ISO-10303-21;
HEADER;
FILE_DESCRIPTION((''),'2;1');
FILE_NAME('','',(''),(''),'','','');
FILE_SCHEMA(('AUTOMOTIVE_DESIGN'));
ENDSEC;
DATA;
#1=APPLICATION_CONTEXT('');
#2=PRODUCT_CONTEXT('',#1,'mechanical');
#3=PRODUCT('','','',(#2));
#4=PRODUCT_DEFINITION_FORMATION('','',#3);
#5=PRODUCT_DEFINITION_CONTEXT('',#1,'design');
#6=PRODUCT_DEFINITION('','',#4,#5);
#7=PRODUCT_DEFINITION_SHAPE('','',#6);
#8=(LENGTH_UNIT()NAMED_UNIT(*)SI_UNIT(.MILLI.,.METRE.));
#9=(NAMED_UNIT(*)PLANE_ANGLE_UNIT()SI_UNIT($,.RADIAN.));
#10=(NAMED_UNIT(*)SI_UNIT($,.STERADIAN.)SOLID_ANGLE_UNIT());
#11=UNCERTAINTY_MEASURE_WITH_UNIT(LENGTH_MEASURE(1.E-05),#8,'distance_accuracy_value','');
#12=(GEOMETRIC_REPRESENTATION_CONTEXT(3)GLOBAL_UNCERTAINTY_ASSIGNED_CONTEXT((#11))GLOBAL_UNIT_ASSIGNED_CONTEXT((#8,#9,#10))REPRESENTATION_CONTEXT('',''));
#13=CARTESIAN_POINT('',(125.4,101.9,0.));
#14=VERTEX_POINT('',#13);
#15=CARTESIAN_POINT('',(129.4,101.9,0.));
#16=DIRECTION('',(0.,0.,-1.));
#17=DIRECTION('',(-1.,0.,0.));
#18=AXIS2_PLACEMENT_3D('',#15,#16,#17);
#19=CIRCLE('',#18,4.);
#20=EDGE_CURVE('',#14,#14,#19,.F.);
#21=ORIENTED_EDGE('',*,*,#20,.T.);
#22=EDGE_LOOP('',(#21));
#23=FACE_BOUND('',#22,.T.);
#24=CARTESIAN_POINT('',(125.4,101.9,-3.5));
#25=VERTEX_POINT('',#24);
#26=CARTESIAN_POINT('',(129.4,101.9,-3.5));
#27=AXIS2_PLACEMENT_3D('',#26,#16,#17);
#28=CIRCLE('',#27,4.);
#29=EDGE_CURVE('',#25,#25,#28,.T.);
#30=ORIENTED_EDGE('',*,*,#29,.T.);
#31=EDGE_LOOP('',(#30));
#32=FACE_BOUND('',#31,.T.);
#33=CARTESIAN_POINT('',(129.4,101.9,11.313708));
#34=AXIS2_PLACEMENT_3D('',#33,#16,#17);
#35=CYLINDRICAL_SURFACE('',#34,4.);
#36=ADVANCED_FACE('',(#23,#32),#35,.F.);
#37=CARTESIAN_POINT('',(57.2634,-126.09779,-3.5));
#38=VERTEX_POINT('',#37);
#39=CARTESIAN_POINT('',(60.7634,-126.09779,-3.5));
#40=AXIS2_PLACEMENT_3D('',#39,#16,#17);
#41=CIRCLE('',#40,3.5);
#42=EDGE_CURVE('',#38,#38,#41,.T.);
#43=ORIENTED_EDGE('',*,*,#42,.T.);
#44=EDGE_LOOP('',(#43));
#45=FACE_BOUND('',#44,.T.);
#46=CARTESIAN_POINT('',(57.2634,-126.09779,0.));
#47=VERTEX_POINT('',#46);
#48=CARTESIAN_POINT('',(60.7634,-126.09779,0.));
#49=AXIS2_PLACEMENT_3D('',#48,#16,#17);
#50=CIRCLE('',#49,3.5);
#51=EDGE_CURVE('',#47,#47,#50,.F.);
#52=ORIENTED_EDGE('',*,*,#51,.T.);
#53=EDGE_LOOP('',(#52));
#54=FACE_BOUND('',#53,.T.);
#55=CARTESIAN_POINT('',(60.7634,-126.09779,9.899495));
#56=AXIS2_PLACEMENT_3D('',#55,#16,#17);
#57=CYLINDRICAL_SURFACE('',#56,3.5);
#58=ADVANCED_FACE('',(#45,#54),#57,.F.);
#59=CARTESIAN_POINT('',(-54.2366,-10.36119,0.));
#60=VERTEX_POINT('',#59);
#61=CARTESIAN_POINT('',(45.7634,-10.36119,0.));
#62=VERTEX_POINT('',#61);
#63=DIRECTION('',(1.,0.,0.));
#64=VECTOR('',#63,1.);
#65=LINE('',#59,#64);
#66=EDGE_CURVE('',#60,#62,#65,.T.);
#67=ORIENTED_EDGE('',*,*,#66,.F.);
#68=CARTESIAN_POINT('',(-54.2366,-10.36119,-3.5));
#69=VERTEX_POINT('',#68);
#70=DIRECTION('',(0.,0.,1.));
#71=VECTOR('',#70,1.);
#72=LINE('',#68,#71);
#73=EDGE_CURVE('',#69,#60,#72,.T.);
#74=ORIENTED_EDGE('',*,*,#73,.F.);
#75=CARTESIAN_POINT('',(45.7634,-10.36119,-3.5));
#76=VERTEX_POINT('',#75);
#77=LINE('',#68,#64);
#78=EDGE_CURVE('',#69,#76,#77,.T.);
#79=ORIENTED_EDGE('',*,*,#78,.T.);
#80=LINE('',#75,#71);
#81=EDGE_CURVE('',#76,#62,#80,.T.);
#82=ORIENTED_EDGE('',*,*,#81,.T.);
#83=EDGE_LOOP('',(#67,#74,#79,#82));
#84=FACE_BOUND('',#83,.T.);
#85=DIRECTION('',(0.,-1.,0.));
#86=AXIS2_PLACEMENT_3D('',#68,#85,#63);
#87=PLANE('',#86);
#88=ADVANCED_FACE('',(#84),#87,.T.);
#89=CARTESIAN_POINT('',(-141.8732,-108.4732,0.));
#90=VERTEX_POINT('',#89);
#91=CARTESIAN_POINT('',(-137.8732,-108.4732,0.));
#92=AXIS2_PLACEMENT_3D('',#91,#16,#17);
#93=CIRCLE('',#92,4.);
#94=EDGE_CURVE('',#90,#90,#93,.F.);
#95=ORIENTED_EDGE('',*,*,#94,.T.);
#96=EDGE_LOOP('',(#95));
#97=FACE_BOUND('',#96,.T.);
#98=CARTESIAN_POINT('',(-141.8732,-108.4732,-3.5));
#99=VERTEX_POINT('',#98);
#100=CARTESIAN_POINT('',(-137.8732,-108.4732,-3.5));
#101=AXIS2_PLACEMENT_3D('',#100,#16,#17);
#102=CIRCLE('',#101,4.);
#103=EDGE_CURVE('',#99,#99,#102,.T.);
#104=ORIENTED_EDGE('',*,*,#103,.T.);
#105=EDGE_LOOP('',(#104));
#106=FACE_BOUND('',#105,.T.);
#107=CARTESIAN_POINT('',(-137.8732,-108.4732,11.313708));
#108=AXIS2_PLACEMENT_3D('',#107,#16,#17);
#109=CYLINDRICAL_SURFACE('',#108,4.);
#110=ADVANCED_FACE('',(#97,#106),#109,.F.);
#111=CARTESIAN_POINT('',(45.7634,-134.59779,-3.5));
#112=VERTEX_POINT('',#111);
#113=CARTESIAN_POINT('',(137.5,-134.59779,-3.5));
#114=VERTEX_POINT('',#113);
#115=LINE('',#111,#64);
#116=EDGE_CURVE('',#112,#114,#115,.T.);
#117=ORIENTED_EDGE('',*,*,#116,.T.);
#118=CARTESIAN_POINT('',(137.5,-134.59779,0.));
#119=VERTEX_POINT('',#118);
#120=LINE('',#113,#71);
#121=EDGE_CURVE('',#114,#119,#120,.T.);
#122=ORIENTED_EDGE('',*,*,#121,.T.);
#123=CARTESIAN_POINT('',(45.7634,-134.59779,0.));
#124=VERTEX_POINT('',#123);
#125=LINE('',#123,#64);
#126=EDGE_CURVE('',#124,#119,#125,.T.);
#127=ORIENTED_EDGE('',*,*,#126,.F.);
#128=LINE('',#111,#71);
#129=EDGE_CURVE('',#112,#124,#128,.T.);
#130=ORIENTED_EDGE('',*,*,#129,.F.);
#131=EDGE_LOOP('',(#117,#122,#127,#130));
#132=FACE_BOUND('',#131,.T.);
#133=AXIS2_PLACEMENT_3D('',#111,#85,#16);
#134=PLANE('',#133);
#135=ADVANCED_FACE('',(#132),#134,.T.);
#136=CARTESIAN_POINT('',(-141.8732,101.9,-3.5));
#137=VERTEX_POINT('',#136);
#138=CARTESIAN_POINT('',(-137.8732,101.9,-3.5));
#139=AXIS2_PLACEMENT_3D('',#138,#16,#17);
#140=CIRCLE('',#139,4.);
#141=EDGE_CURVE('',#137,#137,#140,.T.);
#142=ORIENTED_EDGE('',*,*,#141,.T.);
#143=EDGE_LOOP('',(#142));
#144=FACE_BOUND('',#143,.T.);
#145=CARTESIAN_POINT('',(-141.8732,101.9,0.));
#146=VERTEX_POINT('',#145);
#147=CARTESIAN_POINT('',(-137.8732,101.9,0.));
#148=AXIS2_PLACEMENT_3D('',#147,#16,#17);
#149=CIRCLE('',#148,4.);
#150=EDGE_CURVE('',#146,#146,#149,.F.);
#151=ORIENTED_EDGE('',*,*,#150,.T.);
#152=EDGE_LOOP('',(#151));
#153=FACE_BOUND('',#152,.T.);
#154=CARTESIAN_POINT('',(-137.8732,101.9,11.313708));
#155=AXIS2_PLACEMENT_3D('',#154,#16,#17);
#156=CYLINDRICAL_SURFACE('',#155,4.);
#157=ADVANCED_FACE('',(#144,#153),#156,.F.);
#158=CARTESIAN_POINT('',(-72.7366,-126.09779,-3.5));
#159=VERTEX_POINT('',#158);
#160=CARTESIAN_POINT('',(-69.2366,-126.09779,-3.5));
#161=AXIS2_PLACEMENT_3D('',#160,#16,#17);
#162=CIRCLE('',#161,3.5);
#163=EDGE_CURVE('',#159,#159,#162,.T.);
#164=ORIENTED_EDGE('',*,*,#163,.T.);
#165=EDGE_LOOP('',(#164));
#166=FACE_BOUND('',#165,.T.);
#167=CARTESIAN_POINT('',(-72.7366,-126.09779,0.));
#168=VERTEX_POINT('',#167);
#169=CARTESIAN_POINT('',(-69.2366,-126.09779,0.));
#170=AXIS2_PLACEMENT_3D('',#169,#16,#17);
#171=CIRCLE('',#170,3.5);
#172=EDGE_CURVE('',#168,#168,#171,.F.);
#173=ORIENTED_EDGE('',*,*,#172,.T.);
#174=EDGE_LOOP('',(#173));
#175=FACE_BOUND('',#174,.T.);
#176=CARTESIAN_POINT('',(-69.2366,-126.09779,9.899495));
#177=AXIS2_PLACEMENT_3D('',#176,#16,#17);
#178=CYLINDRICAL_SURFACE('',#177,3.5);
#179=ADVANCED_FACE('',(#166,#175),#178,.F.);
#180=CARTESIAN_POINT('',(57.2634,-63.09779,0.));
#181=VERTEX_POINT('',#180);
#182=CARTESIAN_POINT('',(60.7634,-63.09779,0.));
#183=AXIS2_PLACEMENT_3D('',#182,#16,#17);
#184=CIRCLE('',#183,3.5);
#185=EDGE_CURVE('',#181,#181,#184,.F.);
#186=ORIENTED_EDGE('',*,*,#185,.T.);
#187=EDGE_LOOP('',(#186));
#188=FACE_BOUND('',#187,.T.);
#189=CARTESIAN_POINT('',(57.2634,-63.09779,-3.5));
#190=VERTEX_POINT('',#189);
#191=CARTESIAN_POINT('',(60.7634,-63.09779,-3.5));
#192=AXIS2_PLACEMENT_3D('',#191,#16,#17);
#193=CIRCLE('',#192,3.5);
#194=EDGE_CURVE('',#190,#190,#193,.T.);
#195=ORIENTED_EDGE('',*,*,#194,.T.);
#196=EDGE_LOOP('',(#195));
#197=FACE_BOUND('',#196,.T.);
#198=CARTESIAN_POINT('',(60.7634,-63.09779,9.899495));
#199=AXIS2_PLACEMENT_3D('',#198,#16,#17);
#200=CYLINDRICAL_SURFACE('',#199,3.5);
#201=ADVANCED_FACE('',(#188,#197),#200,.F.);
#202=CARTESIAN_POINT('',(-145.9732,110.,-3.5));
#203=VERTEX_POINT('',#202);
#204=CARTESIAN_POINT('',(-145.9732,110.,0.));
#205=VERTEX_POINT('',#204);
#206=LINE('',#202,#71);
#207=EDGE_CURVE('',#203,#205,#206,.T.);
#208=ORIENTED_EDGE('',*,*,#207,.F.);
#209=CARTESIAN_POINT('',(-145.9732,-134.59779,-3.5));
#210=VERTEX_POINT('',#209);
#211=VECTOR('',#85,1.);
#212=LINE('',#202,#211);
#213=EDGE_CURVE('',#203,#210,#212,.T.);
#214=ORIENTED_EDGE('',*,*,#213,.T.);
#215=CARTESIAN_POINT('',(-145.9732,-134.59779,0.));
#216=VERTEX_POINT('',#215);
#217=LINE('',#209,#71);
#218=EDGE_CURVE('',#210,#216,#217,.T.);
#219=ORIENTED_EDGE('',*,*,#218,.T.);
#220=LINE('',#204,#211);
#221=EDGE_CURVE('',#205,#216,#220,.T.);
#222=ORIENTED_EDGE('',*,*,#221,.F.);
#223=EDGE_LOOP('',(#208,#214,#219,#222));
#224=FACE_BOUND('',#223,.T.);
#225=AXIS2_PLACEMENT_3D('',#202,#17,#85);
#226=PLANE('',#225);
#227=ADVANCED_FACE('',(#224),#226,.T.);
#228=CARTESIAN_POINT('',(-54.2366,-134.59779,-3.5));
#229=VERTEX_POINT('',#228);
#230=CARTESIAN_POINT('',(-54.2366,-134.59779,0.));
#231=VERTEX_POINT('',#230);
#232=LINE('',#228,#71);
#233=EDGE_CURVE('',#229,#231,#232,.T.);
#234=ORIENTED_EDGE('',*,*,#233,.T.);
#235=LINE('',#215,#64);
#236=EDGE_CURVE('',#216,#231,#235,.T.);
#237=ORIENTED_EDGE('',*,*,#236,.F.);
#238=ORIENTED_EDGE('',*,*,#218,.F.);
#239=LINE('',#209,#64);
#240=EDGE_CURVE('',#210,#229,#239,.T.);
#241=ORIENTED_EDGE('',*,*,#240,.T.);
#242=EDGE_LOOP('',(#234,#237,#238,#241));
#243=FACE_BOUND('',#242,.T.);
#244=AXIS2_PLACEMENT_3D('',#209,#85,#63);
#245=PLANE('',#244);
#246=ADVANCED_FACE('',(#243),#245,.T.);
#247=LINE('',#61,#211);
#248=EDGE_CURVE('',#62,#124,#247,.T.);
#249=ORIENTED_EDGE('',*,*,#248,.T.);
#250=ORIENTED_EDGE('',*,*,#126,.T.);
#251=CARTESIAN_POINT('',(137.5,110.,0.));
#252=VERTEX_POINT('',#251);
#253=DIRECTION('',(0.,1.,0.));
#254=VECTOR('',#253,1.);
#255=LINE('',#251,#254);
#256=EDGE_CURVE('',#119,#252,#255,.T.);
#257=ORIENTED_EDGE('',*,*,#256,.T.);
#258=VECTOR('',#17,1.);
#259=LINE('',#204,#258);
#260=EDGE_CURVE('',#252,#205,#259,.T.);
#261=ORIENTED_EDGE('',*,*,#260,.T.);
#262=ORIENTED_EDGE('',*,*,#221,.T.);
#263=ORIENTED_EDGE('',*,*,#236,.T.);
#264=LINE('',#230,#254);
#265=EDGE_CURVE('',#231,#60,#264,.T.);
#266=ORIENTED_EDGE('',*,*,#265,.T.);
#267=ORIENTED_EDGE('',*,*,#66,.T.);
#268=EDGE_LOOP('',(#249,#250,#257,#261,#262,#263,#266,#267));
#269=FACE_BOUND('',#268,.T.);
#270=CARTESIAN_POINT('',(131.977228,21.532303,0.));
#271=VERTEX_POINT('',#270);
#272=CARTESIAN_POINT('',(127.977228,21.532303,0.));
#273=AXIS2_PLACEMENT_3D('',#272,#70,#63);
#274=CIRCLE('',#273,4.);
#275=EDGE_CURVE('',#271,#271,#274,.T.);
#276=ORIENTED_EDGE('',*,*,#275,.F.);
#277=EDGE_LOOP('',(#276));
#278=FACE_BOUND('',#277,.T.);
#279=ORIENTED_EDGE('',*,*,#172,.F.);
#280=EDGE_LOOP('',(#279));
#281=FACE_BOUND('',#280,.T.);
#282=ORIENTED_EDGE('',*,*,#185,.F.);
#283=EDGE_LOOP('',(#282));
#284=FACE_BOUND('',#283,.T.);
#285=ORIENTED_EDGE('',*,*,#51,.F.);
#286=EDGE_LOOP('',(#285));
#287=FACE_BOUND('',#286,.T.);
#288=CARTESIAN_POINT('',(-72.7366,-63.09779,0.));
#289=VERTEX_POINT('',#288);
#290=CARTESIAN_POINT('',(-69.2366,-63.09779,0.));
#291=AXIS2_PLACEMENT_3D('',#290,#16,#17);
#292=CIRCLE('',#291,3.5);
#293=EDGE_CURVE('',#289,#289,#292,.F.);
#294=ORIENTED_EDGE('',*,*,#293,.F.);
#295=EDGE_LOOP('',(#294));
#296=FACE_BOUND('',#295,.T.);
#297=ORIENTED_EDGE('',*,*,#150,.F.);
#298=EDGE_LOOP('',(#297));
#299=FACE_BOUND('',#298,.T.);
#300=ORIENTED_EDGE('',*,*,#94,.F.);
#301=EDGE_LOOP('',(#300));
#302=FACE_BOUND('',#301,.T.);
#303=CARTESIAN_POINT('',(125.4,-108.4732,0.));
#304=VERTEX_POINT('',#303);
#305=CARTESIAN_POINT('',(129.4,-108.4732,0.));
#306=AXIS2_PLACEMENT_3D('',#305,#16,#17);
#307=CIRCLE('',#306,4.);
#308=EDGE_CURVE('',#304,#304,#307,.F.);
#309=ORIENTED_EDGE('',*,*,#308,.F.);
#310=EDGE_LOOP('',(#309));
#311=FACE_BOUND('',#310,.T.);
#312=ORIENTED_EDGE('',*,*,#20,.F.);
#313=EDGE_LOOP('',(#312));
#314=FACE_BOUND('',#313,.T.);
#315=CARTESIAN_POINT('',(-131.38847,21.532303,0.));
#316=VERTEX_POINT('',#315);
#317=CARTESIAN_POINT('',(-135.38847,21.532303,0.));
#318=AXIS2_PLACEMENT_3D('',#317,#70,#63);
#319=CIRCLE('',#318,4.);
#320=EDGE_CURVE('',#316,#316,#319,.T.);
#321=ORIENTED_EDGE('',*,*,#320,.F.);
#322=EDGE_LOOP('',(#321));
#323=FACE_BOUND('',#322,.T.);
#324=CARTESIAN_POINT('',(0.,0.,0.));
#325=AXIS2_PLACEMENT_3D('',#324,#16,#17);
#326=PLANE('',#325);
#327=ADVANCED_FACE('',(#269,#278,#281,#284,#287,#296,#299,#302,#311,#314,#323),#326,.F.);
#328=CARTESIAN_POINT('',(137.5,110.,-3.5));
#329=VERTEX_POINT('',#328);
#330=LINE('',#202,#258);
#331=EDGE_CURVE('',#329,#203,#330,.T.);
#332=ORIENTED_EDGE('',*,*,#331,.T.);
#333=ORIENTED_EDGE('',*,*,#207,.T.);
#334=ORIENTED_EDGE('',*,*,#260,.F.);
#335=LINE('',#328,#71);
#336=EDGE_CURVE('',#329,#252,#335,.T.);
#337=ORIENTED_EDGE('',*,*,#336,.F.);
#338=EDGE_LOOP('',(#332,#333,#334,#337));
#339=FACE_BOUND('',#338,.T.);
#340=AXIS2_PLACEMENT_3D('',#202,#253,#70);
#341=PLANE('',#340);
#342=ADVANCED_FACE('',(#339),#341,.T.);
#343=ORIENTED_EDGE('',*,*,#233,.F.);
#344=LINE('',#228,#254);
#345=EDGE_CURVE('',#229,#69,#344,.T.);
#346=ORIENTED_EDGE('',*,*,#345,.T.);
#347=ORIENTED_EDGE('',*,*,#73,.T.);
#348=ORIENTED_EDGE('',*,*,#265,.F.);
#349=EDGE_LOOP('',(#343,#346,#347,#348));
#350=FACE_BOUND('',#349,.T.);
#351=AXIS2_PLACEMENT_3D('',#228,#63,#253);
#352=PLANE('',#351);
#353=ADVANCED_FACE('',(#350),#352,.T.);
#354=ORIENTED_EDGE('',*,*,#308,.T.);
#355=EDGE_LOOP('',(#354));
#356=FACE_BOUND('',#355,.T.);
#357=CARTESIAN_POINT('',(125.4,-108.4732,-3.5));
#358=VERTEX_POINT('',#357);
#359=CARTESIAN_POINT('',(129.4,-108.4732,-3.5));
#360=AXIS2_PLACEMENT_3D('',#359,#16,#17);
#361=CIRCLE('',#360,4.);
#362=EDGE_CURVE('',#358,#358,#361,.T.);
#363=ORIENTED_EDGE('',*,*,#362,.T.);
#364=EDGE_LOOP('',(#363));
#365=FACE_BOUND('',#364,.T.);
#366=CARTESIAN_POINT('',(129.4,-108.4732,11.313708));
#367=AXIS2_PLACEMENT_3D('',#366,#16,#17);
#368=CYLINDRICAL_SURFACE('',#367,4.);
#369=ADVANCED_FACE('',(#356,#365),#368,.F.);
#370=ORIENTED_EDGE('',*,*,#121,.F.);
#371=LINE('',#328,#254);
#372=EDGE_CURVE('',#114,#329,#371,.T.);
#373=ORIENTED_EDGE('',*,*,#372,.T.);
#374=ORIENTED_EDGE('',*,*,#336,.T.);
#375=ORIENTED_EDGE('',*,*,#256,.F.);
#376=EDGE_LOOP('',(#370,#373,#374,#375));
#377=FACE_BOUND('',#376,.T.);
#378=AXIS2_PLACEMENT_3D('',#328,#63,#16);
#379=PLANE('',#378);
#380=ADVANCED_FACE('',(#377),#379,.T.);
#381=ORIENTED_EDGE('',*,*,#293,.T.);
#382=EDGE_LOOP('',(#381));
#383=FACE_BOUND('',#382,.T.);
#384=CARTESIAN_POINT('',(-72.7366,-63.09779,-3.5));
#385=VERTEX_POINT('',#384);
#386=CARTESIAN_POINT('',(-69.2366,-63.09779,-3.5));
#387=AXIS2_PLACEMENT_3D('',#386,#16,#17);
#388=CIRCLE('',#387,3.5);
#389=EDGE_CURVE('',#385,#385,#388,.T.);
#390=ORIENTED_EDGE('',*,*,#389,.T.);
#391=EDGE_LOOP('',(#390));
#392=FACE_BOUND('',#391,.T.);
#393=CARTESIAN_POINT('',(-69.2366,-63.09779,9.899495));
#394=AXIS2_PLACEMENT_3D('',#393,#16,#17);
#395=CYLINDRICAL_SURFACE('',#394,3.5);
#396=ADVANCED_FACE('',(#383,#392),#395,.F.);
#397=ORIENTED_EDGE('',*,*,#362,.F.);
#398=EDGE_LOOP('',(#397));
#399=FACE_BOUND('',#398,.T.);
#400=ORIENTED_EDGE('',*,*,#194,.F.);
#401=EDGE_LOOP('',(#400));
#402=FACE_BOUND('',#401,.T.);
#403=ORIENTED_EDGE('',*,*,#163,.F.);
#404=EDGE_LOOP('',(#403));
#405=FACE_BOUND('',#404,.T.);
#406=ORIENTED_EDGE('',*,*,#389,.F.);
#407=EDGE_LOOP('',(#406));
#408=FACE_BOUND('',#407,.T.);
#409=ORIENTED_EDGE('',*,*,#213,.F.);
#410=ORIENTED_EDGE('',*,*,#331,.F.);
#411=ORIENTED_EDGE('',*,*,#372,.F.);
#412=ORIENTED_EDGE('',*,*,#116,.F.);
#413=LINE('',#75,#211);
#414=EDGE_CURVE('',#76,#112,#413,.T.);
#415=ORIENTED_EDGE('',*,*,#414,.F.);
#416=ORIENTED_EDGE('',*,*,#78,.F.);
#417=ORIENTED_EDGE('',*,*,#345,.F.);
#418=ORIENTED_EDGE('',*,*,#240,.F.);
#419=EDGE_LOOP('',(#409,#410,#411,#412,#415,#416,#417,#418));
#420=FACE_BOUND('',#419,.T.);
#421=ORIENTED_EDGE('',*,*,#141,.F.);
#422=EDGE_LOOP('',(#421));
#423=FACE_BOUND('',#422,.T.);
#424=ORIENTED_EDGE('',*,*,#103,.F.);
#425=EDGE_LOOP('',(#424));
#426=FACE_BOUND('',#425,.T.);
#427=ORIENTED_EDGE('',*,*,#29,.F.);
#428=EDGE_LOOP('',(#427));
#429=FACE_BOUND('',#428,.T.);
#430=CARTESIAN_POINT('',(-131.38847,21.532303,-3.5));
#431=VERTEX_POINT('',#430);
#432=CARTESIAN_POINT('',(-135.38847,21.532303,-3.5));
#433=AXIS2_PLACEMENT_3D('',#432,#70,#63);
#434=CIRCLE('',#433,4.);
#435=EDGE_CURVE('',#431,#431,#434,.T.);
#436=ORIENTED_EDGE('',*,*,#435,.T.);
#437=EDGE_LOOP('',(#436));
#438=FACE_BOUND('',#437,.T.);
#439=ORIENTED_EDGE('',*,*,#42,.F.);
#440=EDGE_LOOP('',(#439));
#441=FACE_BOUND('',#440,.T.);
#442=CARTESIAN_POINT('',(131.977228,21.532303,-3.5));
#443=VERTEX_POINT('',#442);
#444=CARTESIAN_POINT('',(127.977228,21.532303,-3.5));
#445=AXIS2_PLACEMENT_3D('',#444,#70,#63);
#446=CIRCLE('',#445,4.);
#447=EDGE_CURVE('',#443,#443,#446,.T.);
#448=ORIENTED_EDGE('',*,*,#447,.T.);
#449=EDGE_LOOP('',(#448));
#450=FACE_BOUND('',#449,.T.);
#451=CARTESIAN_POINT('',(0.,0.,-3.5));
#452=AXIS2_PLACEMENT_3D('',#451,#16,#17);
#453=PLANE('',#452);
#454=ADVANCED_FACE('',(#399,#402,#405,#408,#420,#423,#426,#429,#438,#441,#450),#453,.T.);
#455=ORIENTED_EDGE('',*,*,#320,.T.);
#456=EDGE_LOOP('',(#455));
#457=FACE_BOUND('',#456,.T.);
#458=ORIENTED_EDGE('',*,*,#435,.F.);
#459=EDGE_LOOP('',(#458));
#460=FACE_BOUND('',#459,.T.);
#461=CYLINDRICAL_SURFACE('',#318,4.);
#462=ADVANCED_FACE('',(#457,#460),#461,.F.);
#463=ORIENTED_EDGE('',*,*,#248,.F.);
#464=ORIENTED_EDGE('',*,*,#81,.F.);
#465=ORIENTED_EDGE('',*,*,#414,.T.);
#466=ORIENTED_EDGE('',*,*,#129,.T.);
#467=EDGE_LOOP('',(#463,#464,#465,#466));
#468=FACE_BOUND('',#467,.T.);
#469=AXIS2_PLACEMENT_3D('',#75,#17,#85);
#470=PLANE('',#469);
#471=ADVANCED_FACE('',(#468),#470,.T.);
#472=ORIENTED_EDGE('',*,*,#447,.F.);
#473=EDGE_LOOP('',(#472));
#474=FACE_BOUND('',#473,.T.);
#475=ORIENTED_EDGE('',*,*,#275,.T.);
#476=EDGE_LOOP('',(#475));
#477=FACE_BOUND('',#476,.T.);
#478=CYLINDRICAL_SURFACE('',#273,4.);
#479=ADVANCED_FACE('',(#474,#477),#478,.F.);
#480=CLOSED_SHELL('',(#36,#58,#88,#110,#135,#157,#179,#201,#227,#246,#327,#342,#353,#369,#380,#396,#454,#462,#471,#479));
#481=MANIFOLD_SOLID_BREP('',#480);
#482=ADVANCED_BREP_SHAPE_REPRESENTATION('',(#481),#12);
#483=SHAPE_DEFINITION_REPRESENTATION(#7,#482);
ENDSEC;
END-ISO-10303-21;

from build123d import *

# Parameters (mm, degrees)
BASE_FLANGE1_DEPTH    = 3.5
SKETCH2_R             = 3.5
CUT_EXTRUDE1_DEPTH    = 3.5
SKETCH3_R             = 4
CUT_EXTRUDE2_DEPTH    = 3.5
F_8_0MM_DOWEL_HOLE1_D = 8
F_8_0MM_DOWEL_HOLE2_D = 8


# Sheet-metal steps are written as plain solids
with BuildPart() as part:
    # Sketch1 → Base-Flange1 (new body)
    with BuildSketch(Plane.XY):
        Polygon((-54.2366, -134.59778982), (-54.2366, -10.36118982), (45.7634, -10.36118982), (45.7634, -134.59778982), (137.5, -134.59778982), (137.5, 110), (-145.9732, 110), (-145.9732, -134.59778982), align=None)
    extrude(amount=-BASE_FLANGE1_DEPTH)

    # Sketch2 → Cut-Extrude1 (cut)
    with BuildSketch(Plane(origin=(0, 0, -3.5), x_dir=(-1, 0, 0), z_dir=(0, 0, -1))):
        with Locations((-60.7634, -126.09778982)):
            Circle(SKETCH2_R)
        with Locations((69.2366, -126.09778982)):
            Circle(SKETCH2_R)
        with Locations((-60.7634, -63.09778982)):
            Circle(SKETCH2_R)
        with Locations((69.2366, -63.09778982)):
            Circle(SKETCH2_R)
    extrude(amount=-CUT_EXTRUDE1_DEPTH, mode=Mode.SUBTRACT)

    # Sketch3 → Cut-Extrude2 (cut)
    with BuildSketch(Plane(origin=(0, 0, -3.5), x_dir=(-1, 0, 0), z_dir=(0, 0, -1))):
        with Locations((137.8732, 101.9)):
            Circle(SKETCH3_R)
        with Locations((-129.4, 101.9)):
            Circle(SKETCH3_R)
        with Locations((-129.4, -108.47319982)):
            Circle(SKETCH3_R)
        with Locations((137.8732, -108.47319982)):
            Circle(SKETCH3_R)
    extrude(amount=-CUT_EXTRUDE2_DEPTH, mode=Mode.SUBTRACT)

    # Ø8.0mm Dowel Hole1 (through all)
    with Locations(Plane(origin=(-128.31605397, 74.62471448, 0), x_dir=(1, 0, 0), z_dir=(0, 0, 1))):
        with Locations((256.29328213, -53.092411223)):
            Hole(F_8_0MM_DOWEL_HOLE1_D / 2)

    # Ø8.0mm Dowel Hole2 (through all)
    with Locations(Plane(origin=(-128.31605397, 74.62471448, 0), x_dir=(1, 0, 0), z_dir=(0, 0, 1))):
        with Locations((-7.072415731, -53.092411223)):
            Hole(F_8_0MM_DOWEL_HOLE2_D / 2)


solid = part.part
